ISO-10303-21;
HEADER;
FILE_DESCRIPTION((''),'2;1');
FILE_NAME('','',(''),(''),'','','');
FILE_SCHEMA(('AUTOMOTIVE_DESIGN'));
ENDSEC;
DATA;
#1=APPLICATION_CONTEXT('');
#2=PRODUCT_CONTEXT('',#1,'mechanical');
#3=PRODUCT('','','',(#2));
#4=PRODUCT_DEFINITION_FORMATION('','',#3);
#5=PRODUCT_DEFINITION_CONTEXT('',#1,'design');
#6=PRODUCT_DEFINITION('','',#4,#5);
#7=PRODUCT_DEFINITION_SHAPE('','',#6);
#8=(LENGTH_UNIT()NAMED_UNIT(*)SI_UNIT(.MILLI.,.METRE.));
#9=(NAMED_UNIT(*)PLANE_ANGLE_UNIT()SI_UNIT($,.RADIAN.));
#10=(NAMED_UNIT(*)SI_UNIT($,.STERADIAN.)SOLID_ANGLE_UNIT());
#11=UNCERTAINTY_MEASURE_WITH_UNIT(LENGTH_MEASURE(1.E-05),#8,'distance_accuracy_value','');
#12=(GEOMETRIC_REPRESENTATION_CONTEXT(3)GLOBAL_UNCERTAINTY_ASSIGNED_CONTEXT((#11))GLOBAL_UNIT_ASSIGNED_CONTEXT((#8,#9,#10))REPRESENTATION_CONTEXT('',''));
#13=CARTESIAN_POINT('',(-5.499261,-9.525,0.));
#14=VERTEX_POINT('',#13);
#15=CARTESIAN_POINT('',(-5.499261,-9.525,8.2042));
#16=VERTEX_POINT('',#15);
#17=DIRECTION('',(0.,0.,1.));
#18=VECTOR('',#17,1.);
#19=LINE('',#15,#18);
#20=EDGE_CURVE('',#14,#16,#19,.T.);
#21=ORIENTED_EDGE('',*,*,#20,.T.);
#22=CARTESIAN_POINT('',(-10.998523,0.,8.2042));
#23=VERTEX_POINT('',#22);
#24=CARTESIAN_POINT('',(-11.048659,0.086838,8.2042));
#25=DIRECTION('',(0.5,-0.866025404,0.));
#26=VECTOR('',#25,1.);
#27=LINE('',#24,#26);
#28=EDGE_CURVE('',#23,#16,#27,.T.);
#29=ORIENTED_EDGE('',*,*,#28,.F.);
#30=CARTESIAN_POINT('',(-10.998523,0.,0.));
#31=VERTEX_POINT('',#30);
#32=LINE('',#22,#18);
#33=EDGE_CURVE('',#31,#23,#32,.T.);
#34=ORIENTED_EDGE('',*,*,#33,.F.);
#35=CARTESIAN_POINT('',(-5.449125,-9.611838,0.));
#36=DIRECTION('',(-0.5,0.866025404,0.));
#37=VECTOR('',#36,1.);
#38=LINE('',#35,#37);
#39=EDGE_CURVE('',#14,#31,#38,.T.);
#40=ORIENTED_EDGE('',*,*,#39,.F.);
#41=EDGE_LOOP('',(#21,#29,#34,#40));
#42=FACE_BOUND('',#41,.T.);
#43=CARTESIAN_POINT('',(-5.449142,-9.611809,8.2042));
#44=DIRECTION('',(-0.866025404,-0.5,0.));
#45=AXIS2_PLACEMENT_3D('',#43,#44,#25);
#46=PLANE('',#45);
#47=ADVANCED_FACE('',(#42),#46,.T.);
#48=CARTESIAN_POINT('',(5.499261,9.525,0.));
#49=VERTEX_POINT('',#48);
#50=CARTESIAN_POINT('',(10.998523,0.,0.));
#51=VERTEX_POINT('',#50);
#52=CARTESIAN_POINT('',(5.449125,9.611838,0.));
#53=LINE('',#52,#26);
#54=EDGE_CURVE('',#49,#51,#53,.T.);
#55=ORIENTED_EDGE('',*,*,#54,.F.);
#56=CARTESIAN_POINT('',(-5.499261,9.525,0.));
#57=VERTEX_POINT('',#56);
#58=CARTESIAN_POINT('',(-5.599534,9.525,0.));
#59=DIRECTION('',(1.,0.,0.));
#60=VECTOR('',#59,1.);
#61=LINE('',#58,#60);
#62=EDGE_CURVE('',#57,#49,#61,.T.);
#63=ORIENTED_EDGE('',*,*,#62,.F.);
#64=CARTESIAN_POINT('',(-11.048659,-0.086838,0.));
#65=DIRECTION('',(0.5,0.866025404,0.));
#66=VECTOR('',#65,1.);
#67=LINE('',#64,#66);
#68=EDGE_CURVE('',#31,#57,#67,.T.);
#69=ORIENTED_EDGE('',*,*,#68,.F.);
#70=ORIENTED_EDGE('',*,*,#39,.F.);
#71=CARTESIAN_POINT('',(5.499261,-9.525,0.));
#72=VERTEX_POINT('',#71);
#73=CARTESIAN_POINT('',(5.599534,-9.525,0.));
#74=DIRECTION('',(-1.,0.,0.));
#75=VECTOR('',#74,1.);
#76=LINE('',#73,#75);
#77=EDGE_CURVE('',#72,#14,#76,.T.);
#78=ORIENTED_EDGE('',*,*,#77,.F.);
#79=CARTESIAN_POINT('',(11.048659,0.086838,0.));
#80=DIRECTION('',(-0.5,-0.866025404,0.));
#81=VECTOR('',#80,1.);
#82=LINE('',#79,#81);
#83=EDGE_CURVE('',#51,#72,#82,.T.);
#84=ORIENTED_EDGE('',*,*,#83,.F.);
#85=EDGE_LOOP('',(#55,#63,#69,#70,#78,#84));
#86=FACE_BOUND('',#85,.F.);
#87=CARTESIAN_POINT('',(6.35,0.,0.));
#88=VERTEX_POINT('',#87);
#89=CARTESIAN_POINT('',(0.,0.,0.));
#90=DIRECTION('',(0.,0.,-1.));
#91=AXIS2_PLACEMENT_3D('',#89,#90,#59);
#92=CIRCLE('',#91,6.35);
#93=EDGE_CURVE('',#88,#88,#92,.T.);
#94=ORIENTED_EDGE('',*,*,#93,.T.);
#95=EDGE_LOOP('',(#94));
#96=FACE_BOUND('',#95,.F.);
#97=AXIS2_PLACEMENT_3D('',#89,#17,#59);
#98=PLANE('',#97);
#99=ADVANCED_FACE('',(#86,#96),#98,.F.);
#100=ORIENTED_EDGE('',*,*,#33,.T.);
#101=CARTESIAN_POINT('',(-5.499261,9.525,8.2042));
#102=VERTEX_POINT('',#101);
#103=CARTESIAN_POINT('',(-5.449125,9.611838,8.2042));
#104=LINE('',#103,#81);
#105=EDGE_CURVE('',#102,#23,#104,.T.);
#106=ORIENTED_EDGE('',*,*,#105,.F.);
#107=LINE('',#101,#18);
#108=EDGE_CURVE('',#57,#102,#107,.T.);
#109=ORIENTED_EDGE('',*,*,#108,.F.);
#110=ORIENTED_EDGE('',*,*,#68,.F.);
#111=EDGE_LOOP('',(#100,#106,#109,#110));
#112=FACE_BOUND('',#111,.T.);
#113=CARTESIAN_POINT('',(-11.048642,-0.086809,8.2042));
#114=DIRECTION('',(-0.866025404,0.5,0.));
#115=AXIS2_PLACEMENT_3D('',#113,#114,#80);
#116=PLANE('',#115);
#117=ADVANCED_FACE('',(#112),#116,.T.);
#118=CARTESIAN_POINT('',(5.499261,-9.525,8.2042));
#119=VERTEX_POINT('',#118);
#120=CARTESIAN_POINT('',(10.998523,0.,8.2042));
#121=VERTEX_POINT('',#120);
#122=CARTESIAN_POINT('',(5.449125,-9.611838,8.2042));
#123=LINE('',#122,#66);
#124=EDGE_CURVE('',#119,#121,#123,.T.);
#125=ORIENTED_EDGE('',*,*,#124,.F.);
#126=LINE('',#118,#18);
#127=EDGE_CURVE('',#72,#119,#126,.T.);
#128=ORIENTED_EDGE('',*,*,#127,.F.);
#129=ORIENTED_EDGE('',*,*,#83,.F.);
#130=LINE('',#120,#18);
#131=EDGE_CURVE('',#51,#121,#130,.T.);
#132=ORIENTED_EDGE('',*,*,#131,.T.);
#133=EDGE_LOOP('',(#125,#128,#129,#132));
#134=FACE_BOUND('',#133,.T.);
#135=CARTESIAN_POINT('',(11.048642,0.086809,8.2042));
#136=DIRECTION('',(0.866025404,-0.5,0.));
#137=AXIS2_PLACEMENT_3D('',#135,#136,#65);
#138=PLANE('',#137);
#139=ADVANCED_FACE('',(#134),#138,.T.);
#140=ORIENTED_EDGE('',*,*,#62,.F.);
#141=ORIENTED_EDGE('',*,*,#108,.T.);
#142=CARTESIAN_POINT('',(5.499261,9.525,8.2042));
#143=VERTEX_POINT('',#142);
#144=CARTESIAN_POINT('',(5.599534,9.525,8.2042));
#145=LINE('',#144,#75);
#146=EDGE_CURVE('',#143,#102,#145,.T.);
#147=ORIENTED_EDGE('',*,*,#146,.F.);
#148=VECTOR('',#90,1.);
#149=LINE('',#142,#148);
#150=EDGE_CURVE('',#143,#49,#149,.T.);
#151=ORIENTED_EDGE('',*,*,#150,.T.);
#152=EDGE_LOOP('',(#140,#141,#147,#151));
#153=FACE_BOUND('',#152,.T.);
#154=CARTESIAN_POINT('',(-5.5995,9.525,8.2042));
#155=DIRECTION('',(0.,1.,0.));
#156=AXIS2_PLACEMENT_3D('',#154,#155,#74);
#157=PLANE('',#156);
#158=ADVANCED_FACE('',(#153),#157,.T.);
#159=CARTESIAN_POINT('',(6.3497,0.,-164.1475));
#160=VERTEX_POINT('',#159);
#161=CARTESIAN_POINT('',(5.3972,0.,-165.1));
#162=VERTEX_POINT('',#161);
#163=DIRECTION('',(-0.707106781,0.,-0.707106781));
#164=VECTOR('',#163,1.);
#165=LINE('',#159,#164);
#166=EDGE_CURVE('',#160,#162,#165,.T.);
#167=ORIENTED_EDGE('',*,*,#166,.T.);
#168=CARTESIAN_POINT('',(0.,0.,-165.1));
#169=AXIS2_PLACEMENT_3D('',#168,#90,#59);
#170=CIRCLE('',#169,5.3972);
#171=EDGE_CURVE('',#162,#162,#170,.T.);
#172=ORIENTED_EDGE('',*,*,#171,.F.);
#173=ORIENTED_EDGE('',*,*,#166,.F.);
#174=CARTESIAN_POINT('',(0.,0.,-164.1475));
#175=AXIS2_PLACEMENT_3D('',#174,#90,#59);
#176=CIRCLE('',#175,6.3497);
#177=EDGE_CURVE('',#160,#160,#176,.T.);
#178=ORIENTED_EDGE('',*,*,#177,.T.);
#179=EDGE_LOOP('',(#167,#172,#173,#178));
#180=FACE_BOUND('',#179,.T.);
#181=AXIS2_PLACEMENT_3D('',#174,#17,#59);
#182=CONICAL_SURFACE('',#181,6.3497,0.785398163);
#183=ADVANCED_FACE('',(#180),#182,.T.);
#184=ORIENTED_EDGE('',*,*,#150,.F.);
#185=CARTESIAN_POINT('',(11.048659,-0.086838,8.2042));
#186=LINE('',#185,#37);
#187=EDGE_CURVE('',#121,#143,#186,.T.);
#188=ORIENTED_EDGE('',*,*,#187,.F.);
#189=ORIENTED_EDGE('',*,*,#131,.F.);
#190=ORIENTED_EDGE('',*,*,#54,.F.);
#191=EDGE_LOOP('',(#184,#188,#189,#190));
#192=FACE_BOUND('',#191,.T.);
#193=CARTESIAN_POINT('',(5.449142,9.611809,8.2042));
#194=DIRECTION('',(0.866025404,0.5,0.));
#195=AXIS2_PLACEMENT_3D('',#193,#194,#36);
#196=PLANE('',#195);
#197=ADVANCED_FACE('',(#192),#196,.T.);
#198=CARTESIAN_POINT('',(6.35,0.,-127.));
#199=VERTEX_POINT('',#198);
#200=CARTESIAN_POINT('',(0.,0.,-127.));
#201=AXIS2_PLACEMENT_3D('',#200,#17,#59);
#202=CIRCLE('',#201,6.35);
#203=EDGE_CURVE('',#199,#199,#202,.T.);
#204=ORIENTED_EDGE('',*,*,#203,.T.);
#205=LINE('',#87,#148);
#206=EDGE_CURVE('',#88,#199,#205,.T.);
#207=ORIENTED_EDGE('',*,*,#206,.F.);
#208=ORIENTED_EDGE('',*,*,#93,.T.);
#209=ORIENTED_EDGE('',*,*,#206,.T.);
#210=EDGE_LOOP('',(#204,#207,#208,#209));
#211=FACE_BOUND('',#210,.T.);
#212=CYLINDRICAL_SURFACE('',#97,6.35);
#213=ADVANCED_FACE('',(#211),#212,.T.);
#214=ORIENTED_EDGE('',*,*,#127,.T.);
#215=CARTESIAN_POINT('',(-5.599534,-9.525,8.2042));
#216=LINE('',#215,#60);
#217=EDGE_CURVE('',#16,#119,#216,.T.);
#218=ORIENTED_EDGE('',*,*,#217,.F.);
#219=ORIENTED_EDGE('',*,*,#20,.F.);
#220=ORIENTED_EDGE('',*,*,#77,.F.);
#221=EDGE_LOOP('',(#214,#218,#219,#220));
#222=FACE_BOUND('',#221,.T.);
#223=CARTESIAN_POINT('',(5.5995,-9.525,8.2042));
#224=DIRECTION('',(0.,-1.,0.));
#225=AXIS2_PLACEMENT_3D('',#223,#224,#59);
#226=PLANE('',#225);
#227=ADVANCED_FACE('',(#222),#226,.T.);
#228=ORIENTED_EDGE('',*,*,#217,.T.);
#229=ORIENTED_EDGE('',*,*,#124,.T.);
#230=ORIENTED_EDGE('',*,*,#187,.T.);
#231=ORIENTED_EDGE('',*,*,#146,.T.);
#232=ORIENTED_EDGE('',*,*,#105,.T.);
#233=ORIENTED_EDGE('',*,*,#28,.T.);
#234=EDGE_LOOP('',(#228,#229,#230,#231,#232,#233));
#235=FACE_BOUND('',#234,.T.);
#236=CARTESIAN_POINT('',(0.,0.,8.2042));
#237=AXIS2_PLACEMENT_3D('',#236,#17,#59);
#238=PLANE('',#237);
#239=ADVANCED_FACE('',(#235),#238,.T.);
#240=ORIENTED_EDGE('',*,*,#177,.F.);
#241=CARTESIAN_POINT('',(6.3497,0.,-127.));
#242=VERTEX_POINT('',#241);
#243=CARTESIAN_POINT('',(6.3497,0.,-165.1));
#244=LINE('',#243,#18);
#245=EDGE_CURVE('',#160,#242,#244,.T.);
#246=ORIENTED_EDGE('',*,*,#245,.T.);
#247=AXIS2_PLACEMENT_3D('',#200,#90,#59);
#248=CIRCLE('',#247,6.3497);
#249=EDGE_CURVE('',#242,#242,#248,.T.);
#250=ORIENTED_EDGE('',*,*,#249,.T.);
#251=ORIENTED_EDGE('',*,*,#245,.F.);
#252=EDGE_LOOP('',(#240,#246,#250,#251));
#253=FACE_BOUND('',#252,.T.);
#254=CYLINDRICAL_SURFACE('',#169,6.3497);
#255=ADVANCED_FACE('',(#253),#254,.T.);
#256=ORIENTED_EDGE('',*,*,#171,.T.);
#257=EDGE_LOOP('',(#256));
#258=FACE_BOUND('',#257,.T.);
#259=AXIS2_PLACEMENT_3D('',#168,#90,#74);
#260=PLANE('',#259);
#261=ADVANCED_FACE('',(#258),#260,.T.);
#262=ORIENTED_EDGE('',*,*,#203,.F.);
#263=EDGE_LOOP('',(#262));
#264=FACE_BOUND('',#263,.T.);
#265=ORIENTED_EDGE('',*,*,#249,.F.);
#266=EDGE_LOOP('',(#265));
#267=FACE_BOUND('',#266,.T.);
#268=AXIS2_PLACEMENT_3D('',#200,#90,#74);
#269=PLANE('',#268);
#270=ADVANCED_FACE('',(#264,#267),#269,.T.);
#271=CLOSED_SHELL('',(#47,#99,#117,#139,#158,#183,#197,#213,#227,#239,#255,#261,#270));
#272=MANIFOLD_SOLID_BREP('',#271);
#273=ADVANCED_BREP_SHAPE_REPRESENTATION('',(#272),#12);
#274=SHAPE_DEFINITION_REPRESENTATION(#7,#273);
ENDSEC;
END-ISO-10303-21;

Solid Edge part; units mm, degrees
sketch "Sketch1" plane through (0, 0, 0) normal (0, 0, 1) x (1, 0, 0)
  circle A0 centre (0, 0) radius 11.049
  dimension "D1" = 22.098
extrude "Protrusion1" add sketch "Sketch1" along normal blind 8.2042
sketch "Sketch2" plane through (0, 0, 0) normal (0, 0, -1) x (1, 0, 0)
  circle A0 centre (0, 0) radius 6.35
extrude "Protrusion2" add sketch "Sketch2" along normal blind 165.1
sketch "Sketch3" plane through (0, 0, -165.1) normal (0, 0, -1) x (1, 0, 0)
  circle A0 centre (0, 0) radius 6.3497
extrude "Cutout1" cut sketch "Sketch3" against normal blind 38.1 flip side to cut
chamfer "Chamfer_1" distance 0.9525 angle 45 1 edges at (-6.3497, 0, -165.1)
sketch "Sketch4" plane through (0, 0, 8.2042) normal (0, 0, 1) x (1, 0, 0)
  line L0 (-5.5995, 9.525) -> (5.5995, 9.525)
  dimension "D1" = 19.05
extrude "Cutout2" cut sketch "Sketch4" against normal up to next material side at (0, 9.575, 8.2042)
pattern_circular "Pattern1" count 6 over 360 about axis through (0, 0, 8.2042) along (0, 0, 1) of "Cutout2"
properties part number "122986"
